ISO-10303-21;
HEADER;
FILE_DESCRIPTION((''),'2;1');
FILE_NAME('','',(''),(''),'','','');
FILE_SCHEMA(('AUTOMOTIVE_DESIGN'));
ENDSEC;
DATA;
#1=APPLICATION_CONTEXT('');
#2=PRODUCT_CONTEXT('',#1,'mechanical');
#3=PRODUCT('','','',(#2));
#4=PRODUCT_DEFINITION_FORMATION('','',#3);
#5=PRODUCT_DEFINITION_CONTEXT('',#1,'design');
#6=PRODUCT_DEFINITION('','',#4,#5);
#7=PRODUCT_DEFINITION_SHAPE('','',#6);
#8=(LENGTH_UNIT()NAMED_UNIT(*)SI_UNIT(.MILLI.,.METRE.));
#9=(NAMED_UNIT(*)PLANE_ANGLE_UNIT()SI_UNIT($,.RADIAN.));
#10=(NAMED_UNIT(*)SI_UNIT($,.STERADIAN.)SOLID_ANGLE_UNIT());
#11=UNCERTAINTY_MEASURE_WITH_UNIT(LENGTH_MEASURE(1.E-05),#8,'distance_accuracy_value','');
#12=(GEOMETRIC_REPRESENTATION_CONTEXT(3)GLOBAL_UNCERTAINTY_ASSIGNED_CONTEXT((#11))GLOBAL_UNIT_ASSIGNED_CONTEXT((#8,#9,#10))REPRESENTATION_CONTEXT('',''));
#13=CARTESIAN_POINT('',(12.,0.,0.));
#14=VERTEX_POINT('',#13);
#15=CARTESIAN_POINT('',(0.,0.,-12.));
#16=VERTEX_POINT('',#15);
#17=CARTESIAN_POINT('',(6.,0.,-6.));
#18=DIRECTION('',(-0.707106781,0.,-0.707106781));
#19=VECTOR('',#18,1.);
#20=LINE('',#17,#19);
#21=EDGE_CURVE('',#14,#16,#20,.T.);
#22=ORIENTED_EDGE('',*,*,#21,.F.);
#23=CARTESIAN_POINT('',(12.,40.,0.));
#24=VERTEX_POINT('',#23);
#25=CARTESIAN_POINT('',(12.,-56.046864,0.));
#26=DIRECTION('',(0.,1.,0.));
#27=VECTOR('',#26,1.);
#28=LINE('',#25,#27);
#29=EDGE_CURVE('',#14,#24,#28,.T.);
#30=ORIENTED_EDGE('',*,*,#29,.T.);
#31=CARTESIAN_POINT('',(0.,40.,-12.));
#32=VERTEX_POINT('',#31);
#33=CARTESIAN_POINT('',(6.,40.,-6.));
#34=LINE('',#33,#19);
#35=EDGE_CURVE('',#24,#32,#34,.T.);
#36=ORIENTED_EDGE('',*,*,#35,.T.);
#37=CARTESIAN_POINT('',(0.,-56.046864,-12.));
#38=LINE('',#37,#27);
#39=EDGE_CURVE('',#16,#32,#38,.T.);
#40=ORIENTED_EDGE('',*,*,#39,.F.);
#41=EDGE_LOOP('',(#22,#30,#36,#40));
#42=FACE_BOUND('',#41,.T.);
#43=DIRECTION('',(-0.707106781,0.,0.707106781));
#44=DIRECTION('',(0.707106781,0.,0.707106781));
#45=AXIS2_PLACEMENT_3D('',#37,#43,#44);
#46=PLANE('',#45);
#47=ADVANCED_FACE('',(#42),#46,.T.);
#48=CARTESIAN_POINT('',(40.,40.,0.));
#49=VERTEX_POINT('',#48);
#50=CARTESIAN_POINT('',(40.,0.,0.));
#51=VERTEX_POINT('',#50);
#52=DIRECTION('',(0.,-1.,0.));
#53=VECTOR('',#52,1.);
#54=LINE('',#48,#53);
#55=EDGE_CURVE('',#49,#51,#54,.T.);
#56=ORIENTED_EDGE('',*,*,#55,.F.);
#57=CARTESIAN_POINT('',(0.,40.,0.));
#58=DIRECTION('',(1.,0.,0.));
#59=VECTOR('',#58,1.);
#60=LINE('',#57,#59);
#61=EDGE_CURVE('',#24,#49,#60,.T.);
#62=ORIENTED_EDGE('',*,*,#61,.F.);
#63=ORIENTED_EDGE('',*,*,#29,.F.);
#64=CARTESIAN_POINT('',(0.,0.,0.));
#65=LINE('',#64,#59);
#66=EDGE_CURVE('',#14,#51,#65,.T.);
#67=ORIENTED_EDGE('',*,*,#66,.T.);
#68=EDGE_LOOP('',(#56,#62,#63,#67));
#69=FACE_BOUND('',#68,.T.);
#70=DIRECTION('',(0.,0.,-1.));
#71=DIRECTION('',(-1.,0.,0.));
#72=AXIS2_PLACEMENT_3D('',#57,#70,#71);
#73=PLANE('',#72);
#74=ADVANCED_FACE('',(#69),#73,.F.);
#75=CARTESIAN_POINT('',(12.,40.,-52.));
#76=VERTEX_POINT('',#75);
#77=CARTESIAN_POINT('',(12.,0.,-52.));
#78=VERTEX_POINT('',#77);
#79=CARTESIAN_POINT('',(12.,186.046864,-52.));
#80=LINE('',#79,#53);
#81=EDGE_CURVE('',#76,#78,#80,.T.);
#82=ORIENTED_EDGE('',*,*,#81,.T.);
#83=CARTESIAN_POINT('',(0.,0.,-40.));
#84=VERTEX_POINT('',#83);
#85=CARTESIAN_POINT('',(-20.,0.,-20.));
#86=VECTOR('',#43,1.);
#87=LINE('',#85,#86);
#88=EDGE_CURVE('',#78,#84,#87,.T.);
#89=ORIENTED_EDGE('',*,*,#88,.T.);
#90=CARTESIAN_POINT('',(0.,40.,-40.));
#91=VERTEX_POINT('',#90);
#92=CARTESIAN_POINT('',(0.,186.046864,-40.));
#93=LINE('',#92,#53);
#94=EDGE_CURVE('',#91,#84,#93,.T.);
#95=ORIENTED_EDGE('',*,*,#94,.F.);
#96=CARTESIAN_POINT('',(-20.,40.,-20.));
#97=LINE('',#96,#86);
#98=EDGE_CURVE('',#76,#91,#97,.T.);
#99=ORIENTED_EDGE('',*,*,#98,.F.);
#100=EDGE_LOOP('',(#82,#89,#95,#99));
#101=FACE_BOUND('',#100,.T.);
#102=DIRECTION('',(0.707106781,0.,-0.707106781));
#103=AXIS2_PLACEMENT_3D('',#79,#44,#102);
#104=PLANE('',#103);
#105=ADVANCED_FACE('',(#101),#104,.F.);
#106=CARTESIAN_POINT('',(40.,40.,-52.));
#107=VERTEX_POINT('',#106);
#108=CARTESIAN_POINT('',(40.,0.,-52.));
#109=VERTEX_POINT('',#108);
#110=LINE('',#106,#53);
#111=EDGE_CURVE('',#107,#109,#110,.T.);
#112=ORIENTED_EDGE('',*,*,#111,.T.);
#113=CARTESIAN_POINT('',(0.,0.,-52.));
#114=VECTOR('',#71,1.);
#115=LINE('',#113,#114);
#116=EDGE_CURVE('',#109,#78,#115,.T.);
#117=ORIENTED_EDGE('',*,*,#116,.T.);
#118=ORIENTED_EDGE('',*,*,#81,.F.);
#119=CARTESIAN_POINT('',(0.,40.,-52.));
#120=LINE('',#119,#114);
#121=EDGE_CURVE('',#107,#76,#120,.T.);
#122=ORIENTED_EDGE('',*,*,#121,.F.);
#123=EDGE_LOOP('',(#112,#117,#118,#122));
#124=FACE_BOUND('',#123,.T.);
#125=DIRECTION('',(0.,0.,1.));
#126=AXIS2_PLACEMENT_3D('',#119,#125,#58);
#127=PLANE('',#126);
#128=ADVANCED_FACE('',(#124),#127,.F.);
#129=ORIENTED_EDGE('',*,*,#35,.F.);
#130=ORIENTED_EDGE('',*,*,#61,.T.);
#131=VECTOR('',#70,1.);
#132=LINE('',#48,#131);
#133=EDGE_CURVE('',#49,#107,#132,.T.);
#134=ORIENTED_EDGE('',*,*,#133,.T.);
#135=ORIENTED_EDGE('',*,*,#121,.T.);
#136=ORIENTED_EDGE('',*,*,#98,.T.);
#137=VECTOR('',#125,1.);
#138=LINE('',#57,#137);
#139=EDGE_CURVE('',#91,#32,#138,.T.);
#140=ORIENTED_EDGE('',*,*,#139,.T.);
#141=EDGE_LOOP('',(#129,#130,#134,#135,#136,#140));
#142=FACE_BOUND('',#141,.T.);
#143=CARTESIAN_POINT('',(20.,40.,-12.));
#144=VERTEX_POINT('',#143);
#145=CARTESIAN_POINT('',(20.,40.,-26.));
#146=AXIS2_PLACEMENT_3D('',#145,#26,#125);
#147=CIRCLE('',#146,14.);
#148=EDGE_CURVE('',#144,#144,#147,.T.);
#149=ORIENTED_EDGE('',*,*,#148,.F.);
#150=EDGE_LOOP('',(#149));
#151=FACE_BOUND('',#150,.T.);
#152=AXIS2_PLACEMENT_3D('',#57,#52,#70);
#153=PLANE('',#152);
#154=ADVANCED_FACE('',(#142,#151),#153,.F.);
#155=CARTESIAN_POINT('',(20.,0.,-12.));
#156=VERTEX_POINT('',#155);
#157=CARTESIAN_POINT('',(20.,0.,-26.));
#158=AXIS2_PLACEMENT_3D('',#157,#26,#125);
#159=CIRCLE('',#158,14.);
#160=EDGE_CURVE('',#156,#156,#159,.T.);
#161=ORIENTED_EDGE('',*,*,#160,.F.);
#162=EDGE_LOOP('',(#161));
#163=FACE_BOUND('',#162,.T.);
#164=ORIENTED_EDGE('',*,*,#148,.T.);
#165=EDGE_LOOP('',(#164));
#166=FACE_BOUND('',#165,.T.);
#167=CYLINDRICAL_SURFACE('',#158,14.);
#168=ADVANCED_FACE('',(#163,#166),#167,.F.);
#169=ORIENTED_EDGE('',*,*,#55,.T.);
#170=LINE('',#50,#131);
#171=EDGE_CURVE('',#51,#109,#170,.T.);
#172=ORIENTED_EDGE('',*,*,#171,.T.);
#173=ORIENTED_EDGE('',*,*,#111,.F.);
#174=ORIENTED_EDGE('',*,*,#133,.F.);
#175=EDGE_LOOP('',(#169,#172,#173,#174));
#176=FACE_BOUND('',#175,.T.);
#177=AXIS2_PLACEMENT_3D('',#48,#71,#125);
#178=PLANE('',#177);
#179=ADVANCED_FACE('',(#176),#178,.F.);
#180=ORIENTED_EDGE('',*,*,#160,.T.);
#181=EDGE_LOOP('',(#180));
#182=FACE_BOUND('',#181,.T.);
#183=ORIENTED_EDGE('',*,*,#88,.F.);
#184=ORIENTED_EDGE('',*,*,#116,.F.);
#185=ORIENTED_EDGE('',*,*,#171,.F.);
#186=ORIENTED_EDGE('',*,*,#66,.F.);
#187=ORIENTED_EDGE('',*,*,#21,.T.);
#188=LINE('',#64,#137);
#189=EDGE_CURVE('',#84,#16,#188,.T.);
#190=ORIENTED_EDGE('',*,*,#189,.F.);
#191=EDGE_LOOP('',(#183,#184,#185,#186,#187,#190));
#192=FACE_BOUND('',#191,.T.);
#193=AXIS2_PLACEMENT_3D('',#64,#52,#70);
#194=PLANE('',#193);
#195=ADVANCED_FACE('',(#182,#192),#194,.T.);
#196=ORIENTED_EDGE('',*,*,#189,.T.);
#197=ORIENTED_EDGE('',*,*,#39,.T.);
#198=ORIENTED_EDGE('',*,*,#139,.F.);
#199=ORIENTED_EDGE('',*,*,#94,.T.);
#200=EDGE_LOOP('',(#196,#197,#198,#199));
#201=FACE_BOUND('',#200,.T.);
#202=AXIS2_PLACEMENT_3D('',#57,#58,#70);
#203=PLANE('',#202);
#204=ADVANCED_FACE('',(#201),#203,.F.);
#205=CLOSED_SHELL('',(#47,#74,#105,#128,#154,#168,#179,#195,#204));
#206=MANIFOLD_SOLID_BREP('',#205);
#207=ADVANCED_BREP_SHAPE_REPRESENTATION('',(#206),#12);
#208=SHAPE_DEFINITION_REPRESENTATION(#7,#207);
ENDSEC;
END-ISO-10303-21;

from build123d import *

# Parameters (mm, degrees)
SKETCH1_W               = 40
SKETCH1_H               = 52
BOSS_EXTRUDE1_DEPTH     = 40
CUT_EXTRUDE1_START      = -40
CUT_EXTRUDE1_DEPTH      = 40
CUT_EXTRUDE2_DEPTH      = 77.837490849
CUT_EXTRUDE2_DEPTH_BACK = 77.837490849
SKETCH8_R               = 14
CUT_EXTRUDE3_DEPTH      = 77.837490849


# Read off the part's stored shape, not the designer's step: Cut-Extrude1
with BuildPart() as part:
    # Sketch1 → Boss-Extrude1 (new body)
    with BuildSketch(Plane(origin=(0, 0, 0), x_dir=(1, 0, 0), z_dir=(0, 1, 0))):
        with Locations((20, 26)):
            Rectangle(SKETCH1_W, SKETCH1_H)
    extrude(amount=BOSS_EXTRUDE1_DEPTH)

    # Cut-Extrude1 outline → Cut-Extrude1 (cut)
    with BuildSketch(Plane(origin=(0, 40, 0), x_dir=(1, 0, 0), z_dir=(0, 1, 0)).offset(CUT_EXTRUDE1_START)):
        Polygon((0, 52), (0, 40), (12, 52), align=None)
    extrude(amount=CUT_EXTRUDE1_DEPTH, mode=Mode.SUBTRACT)

    # Sketch7 → Cut-Extrude2 (cut, two sides: drawn at the far end of the back side and taken through both)
    with BuildSketch(Plane(origin=(0, 40, 0), x_dir=(1, 0, 0), z_dir=(0, 1, 0)).offset(-CUT_EXTRUDE2_DEPTH_BACK)):
        Polygon((-90.593519883, 102.593519883), (0, 12), (12, 0), (102.593519883, -90.593519883), (-78.593519883, -271.780559649), (-271.780559649, -78.593519883), align=None)
    extrude(amount=CUT_EXTRUDE2_DEPTH + CUT_EXTRUDE2_DEPTH_BACK, mode=Mode.SUBTRACT)

    # Sketch8 → Cut-Extrude3 (cut, through all)
    with BuildSketch(Plane(origin=(0, 40, 0), x_dir=(1, 0, 0), z_dir=(0, 1, 0))):
        with Locations(Location((20, 26, 0), (0, 0, 270))):
            Circle(SKETCH8_R)
    extrude(amount=-CUT_EXTRUDE3_DEPTH, mode=Mode.SUBTRACT)


solid = part.part
